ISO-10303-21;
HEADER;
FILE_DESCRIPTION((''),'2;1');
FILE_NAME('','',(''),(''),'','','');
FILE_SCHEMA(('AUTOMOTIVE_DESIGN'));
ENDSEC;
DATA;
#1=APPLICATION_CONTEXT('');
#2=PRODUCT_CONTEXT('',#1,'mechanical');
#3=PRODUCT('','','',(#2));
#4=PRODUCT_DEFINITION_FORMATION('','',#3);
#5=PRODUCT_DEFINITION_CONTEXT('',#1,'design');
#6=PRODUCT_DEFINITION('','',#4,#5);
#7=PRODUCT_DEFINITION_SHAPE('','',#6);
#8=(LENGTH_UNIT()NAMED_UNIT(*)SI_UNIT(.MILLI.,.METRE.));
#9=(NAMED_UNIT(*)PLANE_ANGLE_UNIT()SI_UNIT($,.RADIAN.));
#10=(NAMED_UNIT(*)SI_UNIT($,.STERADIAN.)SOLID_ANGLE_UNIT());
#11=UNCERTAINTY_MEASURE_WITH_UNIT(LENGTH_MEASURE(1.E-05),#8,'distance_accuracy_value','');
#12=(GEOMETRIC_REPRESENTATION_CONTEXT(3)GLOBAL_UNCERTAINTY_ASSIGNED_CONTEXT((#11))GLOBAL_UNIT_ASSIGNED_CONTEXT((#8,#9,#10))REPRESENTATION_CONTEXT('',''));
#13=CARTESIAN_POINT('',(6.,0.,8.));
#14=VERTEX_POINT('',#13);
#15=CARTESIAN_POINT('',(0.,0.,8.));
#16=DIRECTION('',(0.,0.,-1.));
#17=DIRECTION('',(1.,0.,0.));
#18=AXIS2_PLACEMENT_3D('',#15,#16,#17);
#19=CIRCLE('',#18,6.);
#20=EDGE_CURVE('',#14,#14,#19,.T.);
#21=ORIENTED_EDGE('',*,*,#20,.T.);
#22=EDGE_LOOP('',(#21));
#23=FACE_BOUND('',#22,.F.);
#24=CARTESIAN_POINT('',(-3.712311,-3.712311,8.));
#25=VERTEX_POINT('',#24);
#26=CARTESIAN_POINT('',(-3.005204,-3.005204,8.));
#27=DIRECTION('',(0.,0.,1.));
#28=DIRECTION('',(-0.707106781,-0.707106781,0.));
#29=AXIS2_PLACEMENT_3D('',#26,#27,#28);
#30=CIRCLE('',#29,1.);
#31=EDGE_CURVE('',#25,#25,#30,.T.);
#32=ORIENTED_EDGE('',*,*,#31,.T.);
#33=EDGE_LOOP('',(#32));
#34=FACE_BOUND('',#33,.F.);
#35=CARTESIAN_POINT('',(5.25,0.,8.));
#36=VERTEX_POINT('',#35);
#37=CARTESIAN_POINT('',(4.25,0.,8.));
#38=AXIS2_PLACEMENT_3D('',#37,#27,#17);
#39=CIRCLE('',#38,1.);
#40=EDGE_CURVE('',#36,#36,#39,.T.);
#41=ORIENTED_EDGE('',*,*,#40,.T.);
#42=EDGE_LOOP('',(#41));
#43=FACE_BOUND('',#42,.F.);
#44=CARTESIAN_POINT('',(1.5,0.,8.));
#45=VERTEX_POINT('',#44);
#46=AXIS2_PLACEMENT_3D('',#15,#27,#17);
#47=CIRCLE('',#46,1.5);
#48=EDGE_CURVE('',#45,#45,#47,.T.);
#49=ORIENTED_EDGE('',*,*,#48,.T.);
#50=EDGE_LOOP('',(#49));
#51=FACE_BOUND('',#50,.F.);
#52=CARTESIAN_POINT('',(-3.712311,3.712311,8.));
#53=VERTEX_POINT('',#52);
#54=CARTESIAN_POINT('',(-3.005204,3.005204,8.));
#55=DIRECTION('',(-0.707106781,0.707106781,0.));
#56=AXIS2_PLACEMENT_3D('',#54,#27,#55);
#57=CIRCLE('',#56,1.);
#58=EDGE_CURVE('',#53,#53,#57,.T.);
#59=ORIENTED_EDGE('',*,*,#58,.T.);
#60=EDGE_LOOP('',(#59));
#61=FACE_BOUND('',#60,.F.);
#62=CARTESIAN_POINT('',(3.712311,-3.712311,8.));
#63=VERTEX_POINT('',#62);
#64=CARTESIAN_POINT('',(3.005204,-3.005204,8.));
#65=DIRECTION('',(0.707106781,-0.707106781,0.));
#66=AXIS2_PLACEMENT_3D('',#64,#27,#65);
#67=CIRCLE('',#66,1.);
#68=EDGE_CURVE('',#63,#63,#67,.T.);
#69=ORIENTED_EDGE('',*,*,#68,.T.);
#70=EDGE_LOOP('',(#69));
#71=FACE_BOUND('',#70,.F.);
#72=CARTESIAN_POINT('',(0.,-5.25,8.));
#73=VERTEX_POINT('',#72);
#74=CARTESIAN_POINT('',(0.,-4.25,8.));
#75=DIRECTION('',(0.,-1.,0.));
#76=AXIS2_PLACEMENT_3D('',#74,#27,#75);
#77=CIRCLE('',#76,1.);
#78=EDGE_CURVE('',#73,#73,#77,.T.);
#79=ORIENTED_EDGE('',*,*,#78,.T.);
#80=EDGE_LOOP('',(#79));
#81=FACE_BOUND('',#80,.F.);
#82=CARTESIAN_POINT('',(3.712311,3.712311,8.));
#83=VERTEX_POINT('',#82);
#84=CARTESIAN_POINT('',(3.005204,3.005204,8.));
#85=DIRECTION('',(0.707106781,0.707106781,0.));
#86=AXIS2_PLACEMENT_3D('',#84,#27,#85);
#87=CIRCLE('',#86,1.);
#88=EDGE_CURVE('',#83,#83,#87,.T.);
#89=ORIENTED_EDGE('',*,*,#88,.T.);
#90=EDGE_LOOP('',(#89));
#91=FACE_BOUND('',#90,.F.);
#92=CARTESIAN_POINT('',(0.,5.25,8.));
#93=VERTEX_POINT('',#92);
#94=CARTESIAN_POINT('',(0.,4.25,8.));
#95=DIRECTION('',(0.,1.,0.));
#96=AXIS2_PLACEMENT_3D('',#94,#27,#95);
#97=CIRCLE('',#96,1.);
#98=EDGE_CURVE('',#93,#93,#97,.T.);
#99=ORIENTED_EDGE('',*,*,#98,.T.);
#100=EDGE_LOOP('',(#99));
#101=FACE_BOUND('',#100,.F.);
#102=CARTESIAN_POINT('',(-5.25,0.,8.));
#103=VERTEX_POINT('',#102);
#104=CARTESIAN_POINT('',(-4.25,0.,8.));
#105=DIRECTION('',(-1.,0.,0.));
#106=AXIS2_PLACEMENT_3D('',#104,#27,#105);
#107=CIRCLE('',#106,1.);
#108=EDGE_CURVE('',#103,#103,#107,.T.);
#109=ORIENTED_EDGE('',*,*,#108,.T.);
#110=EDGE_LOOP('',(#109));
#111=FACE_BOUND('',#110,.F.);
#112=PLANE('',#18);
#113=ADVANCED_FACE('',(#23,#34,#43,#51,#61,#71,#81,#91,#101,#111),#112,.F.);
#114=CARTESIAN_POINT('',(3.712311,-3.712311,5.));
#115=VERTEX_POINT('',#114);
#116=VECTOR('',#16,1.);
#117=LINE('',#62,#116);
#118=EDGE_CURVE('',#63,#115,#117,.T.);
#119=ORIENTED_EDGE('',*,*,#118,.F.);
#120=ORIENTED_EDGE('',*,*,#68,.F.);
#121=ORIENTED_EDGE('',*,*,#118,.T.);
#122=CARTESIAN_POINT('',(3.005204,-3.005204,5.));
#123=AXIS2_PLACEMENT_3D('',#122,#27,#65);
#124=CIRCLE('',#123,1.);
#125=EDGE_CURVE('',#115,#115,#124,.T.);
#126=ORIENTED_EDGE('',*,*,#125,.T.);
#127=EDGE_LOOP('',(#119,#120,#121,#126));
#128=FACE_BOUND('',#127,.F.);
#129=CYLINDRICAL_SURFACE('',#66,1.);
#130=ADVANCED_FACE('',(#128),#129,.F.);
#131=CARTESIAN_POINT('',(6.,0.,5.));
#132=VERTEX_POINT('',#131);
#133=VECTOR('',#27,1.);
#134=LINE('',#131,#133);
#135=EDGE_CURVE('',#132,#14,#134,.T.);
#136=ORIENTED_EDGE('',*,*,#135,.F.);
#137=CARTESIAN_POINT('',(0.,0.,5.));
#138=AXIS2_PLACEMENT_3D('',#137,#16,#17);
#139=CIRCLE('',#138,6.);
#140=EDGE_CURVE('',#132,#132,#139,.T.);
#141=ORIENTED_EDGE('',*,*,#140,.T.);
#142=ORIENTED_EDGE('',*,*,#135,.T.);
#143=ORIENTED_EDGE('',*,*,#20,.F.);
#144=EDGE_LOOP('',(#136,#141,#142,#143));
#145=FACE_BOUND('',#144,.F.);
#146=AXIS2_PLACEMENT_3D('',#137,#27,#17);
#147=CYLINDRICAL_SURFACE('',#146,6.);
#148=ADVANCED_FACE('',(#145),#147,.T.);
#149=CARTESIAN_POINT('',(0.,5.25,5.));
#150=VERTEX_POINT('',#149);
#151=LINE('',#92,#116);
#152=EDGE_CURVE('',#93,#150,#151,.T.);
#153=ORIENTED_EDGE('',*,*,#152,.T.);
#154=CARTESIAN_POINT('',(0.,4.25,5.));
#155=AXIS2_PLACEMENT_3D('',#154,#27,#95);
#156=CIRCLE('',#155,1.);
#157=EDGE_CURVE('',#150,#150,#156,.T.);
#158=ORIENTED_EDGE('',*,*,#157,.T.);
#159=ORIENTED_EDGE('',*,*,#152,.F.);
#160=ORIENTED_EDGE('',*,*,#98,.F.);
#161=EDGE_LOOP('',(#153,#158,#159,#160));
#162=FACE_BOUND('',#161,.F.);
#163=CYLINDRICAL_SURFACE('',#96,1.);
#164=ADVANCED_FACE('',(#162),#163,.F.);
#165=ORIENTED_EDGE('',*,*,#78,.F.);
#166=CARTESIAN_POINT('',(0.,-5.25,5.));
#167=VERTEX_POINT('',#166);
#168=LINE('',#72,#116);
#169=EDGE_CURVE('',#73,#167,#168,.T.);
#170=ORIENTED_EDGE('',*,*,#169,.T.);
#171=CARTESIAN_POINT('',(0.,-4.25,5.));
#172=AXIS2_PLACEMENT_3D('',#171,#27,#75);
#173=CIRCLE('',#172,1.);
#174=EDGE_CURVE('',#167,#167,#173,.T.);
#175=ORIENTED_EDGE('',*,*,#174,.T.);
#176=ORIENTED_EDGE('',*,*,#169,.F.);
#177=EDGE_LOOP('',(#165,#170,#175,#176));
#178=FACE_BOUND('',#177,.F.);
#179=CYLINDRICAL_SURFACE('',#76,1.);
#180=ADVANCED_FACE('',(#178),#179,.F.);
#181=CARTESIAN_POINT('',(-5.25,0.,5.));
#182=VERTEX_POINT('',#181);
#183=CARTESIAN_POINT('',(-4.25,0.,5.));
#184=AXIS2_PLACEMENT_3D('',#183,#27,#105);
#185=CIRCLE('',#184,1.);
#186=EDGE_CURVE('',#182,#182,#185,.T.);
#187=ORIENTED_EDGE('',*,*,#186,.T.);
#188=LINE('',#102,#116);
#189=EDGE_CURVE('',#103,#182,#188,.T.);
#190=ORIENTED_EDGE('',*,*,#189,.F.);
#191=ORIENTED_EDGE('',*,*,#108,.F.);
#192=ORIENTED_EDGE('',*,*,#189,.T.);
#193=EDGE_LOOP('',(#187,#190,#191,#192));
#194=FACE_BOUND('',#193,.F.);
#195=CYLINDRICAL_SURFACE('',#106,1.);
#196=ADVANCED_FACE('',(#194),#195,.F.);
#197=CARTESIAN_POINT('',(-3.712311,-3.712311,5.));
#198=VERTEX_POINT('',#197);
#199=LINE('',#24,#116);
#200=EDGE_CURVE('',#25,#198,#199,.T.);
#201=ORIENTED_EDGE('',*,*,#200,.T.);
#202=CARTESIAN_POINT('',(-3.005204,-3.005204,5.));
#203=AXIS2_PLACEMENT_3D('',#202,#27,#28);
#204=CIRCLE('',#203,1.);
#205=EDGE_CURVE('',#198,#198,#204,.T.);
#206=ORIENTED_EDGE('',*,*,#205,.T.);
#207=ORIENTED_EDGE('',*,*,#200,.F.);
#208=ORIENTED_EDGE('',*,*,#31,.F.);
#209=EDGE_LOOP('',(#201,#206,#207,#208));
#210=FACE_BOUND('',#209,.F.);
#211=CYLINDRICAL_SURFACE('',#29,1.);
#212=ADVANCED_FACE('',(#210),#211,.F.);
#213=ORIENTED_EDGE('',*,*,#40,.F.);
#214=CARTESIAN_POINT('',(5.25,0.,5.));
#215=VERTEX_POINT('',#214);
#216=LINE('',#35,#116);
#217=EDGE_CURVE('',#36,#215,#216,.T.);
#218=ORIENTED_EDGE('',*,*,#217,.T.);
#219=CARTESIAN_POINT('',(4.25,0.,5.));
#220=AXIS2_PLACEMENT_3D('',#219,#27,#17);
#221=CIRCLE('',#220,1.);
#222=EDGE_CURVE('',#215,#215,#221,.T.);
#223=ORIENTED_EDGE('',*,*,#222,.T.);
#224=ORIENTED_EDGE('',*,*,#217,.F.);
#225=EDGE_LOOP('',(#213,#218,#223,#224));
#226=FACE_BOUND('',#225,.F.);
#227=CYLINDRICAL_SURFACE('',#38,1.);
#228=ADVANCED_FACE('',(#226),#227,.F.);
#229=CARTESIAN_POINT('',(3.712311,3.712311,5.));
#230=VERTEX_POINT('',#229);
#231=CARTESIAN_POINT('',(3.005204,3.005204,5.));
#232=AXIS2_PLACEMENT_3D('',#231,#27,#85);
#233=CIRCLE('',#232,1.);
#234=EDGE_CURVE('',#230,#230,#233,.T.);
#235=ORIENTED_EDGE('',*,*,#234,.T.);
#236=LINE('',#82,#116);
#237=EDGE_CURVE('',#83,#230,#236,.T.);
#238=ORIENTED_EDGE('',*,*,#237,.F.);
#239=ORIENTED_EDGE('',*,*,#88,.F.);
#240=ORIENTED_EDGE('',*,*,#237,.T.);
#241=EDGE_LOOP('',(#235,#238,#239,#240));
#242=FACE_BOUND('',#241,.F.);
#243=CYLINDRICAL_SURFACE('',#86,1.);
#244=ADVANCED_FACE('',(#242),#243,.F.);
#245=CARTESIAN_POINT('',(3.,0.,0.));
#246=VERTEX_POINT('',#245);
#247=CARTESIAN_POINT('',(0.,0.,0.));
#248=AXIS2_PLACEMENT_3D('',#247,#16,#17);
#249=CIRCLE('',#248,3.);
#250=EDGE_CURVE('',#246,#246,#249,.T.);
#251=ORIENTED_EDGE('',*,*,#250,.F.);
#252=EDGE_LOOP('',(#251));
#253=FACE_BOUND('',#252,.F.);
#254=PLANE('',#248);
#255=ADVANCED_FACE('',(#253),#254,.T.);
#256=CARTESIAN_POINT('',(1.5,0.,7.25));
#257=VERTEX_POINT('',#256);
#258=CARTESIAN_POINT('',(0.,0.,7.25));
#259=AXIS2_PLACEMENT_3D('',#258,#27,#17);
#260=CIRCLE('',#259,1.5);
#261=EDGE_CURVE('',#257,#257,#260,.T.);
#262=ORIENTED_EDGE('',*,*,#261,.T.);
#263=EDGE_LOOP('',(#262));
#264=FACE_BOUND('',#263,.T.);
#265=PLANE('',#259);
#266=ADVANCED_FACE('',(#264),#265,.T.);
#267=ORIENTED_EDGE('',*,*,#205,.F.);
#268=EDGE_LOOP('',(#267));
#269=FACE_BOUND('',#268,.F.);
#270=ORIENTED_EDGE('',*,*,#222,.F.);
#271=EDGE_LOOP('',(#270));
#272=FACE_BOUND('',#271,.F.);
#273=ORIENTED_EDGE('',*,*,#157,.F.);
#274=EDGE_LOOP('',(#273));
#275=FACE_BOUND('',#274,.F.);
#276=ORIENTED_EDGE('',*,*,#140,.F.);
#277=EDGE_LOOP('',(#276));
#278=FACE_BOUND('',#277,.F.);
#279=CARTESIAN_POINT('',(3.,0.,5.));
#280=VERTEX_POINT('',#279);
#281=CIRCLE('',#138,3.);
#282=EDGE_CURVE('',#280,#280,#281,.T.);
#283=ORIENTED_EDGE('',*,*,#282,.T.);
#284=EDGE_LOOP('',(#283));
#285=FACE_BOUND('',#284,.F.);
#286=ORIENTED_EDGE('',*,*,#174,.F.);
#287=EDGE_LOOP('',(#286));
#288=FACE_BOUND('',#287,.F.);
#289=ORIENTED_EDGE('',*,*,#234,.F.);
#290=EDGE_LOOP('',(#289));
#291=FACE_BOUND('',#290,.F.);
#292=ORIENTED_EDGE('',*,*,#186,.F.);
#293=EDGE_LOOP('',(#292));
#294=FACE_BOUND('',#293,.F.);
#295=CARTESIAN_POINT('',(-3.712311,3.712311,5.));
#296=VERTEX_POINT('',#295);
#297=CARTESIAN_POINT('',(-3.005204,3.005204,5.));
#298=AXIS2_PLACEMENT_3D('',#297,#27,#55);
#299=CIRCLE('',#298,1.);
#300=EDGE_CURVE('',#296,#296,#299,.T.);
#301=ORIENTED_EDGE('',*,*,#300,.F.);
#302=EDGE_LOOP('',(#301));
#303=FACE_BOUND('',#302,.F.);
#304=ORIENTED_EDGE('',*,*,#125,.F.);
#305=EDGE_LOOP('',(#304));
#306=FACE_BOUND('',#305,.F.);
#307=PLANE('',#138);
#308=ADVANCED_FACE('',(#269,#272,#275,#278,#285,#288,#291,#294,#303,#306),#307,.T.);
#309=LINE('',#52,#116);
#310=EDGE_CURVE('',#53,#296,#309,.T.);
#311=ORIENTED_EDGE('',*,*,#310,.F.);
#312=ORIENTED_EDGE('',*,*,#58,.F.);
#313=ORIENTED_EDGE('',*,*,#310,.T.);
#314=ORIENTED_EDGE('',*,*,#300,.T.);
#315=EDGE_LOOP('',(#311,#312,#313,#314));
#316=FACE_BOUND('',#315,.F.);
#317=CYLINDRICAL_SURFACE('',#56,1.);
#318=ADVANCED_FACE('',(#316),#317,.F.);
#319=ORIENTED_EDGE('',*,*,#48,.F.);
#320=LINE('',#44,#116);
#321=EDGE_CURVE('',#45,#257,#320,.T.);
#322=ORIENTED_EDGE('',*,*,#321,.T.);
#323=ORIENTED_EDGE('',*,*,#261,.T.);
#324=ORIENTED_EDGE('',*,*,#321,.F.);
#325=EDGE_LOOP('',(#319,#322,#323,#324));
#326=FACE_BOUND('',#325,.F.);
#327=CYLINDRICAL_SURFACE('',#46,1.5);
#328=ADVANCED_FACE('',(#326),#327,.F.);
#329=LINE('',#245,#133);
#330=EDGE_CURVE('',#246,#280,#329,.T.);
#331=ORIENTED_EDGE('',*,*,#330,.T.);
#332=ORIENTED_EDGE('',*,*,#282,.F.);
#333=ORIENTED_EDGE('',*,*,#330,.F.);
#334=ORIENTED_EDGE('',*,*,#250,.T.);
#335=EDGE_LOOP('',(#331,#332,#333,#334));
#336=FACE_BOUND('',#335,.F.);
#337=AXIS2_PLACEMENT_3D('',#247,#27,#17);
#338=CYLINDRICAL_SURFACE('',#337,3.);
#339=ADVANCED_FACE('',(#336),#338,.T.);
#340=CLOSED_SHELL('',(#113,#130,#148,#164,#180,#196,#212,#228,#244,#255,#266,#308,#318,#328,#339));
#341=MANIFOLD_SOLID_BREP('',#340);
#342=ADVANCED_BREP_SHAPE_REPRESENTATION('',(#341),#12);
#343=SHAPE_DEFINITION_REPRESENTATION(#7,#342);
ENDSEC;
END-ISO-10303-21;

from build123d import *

# Parameters (mm, degrees)
F2_R            = 1
F3_DEPTH        = 3
F3_COPIES_COUNT = 8
F4_R            = 1.5
F5_DEPTH        = 0.75


# Not quite as in the source:
# - a pattern or mirror of a feature is missing from the dataset's text; its kind, count and spacing are read off the source's solid


with BuildPart() as f1:
    # F0 (on Front) → F1 (revolve)
    with BuildSketch(Plane.XZ):
        Polygon((0, 8), (0, 0), (3, 0), (3, 5), (6, 5), (6, 8), align=None)
    revolve(axis=Axis((0, 0, 4), (0, 0, -1)))

    # F2 (on face) → F3 (cut, through all)
    with BuildSketch(Plane.XY.offset(8)):
        with Locations((4.25, 0)):
            Circle(F2_R)
    f3 = extrude(amount=-F3_DEPTH, mode=Mode.SUBTRACT)

    # F3_copies: F3 ×8 about axis
    f3_copies_axis = Axis((0, 0, 0), (0, 0, 1))
    for i in range(1, F3_COPIES_COUNT):
        add(f3.rotate(f3_copies_axis, i * 360 / F3_COPIES_COUNT), mode=Mode.SUBTRACT)

    # F4 (on face) → F5 (cut)
    with BuildSketch(Plane.XY.offset(8)):
        Circle(F4_R)
    extrude(amount=-F5_DEPTH, mode=Mode.SUBTRACT)


solid = f1.part
